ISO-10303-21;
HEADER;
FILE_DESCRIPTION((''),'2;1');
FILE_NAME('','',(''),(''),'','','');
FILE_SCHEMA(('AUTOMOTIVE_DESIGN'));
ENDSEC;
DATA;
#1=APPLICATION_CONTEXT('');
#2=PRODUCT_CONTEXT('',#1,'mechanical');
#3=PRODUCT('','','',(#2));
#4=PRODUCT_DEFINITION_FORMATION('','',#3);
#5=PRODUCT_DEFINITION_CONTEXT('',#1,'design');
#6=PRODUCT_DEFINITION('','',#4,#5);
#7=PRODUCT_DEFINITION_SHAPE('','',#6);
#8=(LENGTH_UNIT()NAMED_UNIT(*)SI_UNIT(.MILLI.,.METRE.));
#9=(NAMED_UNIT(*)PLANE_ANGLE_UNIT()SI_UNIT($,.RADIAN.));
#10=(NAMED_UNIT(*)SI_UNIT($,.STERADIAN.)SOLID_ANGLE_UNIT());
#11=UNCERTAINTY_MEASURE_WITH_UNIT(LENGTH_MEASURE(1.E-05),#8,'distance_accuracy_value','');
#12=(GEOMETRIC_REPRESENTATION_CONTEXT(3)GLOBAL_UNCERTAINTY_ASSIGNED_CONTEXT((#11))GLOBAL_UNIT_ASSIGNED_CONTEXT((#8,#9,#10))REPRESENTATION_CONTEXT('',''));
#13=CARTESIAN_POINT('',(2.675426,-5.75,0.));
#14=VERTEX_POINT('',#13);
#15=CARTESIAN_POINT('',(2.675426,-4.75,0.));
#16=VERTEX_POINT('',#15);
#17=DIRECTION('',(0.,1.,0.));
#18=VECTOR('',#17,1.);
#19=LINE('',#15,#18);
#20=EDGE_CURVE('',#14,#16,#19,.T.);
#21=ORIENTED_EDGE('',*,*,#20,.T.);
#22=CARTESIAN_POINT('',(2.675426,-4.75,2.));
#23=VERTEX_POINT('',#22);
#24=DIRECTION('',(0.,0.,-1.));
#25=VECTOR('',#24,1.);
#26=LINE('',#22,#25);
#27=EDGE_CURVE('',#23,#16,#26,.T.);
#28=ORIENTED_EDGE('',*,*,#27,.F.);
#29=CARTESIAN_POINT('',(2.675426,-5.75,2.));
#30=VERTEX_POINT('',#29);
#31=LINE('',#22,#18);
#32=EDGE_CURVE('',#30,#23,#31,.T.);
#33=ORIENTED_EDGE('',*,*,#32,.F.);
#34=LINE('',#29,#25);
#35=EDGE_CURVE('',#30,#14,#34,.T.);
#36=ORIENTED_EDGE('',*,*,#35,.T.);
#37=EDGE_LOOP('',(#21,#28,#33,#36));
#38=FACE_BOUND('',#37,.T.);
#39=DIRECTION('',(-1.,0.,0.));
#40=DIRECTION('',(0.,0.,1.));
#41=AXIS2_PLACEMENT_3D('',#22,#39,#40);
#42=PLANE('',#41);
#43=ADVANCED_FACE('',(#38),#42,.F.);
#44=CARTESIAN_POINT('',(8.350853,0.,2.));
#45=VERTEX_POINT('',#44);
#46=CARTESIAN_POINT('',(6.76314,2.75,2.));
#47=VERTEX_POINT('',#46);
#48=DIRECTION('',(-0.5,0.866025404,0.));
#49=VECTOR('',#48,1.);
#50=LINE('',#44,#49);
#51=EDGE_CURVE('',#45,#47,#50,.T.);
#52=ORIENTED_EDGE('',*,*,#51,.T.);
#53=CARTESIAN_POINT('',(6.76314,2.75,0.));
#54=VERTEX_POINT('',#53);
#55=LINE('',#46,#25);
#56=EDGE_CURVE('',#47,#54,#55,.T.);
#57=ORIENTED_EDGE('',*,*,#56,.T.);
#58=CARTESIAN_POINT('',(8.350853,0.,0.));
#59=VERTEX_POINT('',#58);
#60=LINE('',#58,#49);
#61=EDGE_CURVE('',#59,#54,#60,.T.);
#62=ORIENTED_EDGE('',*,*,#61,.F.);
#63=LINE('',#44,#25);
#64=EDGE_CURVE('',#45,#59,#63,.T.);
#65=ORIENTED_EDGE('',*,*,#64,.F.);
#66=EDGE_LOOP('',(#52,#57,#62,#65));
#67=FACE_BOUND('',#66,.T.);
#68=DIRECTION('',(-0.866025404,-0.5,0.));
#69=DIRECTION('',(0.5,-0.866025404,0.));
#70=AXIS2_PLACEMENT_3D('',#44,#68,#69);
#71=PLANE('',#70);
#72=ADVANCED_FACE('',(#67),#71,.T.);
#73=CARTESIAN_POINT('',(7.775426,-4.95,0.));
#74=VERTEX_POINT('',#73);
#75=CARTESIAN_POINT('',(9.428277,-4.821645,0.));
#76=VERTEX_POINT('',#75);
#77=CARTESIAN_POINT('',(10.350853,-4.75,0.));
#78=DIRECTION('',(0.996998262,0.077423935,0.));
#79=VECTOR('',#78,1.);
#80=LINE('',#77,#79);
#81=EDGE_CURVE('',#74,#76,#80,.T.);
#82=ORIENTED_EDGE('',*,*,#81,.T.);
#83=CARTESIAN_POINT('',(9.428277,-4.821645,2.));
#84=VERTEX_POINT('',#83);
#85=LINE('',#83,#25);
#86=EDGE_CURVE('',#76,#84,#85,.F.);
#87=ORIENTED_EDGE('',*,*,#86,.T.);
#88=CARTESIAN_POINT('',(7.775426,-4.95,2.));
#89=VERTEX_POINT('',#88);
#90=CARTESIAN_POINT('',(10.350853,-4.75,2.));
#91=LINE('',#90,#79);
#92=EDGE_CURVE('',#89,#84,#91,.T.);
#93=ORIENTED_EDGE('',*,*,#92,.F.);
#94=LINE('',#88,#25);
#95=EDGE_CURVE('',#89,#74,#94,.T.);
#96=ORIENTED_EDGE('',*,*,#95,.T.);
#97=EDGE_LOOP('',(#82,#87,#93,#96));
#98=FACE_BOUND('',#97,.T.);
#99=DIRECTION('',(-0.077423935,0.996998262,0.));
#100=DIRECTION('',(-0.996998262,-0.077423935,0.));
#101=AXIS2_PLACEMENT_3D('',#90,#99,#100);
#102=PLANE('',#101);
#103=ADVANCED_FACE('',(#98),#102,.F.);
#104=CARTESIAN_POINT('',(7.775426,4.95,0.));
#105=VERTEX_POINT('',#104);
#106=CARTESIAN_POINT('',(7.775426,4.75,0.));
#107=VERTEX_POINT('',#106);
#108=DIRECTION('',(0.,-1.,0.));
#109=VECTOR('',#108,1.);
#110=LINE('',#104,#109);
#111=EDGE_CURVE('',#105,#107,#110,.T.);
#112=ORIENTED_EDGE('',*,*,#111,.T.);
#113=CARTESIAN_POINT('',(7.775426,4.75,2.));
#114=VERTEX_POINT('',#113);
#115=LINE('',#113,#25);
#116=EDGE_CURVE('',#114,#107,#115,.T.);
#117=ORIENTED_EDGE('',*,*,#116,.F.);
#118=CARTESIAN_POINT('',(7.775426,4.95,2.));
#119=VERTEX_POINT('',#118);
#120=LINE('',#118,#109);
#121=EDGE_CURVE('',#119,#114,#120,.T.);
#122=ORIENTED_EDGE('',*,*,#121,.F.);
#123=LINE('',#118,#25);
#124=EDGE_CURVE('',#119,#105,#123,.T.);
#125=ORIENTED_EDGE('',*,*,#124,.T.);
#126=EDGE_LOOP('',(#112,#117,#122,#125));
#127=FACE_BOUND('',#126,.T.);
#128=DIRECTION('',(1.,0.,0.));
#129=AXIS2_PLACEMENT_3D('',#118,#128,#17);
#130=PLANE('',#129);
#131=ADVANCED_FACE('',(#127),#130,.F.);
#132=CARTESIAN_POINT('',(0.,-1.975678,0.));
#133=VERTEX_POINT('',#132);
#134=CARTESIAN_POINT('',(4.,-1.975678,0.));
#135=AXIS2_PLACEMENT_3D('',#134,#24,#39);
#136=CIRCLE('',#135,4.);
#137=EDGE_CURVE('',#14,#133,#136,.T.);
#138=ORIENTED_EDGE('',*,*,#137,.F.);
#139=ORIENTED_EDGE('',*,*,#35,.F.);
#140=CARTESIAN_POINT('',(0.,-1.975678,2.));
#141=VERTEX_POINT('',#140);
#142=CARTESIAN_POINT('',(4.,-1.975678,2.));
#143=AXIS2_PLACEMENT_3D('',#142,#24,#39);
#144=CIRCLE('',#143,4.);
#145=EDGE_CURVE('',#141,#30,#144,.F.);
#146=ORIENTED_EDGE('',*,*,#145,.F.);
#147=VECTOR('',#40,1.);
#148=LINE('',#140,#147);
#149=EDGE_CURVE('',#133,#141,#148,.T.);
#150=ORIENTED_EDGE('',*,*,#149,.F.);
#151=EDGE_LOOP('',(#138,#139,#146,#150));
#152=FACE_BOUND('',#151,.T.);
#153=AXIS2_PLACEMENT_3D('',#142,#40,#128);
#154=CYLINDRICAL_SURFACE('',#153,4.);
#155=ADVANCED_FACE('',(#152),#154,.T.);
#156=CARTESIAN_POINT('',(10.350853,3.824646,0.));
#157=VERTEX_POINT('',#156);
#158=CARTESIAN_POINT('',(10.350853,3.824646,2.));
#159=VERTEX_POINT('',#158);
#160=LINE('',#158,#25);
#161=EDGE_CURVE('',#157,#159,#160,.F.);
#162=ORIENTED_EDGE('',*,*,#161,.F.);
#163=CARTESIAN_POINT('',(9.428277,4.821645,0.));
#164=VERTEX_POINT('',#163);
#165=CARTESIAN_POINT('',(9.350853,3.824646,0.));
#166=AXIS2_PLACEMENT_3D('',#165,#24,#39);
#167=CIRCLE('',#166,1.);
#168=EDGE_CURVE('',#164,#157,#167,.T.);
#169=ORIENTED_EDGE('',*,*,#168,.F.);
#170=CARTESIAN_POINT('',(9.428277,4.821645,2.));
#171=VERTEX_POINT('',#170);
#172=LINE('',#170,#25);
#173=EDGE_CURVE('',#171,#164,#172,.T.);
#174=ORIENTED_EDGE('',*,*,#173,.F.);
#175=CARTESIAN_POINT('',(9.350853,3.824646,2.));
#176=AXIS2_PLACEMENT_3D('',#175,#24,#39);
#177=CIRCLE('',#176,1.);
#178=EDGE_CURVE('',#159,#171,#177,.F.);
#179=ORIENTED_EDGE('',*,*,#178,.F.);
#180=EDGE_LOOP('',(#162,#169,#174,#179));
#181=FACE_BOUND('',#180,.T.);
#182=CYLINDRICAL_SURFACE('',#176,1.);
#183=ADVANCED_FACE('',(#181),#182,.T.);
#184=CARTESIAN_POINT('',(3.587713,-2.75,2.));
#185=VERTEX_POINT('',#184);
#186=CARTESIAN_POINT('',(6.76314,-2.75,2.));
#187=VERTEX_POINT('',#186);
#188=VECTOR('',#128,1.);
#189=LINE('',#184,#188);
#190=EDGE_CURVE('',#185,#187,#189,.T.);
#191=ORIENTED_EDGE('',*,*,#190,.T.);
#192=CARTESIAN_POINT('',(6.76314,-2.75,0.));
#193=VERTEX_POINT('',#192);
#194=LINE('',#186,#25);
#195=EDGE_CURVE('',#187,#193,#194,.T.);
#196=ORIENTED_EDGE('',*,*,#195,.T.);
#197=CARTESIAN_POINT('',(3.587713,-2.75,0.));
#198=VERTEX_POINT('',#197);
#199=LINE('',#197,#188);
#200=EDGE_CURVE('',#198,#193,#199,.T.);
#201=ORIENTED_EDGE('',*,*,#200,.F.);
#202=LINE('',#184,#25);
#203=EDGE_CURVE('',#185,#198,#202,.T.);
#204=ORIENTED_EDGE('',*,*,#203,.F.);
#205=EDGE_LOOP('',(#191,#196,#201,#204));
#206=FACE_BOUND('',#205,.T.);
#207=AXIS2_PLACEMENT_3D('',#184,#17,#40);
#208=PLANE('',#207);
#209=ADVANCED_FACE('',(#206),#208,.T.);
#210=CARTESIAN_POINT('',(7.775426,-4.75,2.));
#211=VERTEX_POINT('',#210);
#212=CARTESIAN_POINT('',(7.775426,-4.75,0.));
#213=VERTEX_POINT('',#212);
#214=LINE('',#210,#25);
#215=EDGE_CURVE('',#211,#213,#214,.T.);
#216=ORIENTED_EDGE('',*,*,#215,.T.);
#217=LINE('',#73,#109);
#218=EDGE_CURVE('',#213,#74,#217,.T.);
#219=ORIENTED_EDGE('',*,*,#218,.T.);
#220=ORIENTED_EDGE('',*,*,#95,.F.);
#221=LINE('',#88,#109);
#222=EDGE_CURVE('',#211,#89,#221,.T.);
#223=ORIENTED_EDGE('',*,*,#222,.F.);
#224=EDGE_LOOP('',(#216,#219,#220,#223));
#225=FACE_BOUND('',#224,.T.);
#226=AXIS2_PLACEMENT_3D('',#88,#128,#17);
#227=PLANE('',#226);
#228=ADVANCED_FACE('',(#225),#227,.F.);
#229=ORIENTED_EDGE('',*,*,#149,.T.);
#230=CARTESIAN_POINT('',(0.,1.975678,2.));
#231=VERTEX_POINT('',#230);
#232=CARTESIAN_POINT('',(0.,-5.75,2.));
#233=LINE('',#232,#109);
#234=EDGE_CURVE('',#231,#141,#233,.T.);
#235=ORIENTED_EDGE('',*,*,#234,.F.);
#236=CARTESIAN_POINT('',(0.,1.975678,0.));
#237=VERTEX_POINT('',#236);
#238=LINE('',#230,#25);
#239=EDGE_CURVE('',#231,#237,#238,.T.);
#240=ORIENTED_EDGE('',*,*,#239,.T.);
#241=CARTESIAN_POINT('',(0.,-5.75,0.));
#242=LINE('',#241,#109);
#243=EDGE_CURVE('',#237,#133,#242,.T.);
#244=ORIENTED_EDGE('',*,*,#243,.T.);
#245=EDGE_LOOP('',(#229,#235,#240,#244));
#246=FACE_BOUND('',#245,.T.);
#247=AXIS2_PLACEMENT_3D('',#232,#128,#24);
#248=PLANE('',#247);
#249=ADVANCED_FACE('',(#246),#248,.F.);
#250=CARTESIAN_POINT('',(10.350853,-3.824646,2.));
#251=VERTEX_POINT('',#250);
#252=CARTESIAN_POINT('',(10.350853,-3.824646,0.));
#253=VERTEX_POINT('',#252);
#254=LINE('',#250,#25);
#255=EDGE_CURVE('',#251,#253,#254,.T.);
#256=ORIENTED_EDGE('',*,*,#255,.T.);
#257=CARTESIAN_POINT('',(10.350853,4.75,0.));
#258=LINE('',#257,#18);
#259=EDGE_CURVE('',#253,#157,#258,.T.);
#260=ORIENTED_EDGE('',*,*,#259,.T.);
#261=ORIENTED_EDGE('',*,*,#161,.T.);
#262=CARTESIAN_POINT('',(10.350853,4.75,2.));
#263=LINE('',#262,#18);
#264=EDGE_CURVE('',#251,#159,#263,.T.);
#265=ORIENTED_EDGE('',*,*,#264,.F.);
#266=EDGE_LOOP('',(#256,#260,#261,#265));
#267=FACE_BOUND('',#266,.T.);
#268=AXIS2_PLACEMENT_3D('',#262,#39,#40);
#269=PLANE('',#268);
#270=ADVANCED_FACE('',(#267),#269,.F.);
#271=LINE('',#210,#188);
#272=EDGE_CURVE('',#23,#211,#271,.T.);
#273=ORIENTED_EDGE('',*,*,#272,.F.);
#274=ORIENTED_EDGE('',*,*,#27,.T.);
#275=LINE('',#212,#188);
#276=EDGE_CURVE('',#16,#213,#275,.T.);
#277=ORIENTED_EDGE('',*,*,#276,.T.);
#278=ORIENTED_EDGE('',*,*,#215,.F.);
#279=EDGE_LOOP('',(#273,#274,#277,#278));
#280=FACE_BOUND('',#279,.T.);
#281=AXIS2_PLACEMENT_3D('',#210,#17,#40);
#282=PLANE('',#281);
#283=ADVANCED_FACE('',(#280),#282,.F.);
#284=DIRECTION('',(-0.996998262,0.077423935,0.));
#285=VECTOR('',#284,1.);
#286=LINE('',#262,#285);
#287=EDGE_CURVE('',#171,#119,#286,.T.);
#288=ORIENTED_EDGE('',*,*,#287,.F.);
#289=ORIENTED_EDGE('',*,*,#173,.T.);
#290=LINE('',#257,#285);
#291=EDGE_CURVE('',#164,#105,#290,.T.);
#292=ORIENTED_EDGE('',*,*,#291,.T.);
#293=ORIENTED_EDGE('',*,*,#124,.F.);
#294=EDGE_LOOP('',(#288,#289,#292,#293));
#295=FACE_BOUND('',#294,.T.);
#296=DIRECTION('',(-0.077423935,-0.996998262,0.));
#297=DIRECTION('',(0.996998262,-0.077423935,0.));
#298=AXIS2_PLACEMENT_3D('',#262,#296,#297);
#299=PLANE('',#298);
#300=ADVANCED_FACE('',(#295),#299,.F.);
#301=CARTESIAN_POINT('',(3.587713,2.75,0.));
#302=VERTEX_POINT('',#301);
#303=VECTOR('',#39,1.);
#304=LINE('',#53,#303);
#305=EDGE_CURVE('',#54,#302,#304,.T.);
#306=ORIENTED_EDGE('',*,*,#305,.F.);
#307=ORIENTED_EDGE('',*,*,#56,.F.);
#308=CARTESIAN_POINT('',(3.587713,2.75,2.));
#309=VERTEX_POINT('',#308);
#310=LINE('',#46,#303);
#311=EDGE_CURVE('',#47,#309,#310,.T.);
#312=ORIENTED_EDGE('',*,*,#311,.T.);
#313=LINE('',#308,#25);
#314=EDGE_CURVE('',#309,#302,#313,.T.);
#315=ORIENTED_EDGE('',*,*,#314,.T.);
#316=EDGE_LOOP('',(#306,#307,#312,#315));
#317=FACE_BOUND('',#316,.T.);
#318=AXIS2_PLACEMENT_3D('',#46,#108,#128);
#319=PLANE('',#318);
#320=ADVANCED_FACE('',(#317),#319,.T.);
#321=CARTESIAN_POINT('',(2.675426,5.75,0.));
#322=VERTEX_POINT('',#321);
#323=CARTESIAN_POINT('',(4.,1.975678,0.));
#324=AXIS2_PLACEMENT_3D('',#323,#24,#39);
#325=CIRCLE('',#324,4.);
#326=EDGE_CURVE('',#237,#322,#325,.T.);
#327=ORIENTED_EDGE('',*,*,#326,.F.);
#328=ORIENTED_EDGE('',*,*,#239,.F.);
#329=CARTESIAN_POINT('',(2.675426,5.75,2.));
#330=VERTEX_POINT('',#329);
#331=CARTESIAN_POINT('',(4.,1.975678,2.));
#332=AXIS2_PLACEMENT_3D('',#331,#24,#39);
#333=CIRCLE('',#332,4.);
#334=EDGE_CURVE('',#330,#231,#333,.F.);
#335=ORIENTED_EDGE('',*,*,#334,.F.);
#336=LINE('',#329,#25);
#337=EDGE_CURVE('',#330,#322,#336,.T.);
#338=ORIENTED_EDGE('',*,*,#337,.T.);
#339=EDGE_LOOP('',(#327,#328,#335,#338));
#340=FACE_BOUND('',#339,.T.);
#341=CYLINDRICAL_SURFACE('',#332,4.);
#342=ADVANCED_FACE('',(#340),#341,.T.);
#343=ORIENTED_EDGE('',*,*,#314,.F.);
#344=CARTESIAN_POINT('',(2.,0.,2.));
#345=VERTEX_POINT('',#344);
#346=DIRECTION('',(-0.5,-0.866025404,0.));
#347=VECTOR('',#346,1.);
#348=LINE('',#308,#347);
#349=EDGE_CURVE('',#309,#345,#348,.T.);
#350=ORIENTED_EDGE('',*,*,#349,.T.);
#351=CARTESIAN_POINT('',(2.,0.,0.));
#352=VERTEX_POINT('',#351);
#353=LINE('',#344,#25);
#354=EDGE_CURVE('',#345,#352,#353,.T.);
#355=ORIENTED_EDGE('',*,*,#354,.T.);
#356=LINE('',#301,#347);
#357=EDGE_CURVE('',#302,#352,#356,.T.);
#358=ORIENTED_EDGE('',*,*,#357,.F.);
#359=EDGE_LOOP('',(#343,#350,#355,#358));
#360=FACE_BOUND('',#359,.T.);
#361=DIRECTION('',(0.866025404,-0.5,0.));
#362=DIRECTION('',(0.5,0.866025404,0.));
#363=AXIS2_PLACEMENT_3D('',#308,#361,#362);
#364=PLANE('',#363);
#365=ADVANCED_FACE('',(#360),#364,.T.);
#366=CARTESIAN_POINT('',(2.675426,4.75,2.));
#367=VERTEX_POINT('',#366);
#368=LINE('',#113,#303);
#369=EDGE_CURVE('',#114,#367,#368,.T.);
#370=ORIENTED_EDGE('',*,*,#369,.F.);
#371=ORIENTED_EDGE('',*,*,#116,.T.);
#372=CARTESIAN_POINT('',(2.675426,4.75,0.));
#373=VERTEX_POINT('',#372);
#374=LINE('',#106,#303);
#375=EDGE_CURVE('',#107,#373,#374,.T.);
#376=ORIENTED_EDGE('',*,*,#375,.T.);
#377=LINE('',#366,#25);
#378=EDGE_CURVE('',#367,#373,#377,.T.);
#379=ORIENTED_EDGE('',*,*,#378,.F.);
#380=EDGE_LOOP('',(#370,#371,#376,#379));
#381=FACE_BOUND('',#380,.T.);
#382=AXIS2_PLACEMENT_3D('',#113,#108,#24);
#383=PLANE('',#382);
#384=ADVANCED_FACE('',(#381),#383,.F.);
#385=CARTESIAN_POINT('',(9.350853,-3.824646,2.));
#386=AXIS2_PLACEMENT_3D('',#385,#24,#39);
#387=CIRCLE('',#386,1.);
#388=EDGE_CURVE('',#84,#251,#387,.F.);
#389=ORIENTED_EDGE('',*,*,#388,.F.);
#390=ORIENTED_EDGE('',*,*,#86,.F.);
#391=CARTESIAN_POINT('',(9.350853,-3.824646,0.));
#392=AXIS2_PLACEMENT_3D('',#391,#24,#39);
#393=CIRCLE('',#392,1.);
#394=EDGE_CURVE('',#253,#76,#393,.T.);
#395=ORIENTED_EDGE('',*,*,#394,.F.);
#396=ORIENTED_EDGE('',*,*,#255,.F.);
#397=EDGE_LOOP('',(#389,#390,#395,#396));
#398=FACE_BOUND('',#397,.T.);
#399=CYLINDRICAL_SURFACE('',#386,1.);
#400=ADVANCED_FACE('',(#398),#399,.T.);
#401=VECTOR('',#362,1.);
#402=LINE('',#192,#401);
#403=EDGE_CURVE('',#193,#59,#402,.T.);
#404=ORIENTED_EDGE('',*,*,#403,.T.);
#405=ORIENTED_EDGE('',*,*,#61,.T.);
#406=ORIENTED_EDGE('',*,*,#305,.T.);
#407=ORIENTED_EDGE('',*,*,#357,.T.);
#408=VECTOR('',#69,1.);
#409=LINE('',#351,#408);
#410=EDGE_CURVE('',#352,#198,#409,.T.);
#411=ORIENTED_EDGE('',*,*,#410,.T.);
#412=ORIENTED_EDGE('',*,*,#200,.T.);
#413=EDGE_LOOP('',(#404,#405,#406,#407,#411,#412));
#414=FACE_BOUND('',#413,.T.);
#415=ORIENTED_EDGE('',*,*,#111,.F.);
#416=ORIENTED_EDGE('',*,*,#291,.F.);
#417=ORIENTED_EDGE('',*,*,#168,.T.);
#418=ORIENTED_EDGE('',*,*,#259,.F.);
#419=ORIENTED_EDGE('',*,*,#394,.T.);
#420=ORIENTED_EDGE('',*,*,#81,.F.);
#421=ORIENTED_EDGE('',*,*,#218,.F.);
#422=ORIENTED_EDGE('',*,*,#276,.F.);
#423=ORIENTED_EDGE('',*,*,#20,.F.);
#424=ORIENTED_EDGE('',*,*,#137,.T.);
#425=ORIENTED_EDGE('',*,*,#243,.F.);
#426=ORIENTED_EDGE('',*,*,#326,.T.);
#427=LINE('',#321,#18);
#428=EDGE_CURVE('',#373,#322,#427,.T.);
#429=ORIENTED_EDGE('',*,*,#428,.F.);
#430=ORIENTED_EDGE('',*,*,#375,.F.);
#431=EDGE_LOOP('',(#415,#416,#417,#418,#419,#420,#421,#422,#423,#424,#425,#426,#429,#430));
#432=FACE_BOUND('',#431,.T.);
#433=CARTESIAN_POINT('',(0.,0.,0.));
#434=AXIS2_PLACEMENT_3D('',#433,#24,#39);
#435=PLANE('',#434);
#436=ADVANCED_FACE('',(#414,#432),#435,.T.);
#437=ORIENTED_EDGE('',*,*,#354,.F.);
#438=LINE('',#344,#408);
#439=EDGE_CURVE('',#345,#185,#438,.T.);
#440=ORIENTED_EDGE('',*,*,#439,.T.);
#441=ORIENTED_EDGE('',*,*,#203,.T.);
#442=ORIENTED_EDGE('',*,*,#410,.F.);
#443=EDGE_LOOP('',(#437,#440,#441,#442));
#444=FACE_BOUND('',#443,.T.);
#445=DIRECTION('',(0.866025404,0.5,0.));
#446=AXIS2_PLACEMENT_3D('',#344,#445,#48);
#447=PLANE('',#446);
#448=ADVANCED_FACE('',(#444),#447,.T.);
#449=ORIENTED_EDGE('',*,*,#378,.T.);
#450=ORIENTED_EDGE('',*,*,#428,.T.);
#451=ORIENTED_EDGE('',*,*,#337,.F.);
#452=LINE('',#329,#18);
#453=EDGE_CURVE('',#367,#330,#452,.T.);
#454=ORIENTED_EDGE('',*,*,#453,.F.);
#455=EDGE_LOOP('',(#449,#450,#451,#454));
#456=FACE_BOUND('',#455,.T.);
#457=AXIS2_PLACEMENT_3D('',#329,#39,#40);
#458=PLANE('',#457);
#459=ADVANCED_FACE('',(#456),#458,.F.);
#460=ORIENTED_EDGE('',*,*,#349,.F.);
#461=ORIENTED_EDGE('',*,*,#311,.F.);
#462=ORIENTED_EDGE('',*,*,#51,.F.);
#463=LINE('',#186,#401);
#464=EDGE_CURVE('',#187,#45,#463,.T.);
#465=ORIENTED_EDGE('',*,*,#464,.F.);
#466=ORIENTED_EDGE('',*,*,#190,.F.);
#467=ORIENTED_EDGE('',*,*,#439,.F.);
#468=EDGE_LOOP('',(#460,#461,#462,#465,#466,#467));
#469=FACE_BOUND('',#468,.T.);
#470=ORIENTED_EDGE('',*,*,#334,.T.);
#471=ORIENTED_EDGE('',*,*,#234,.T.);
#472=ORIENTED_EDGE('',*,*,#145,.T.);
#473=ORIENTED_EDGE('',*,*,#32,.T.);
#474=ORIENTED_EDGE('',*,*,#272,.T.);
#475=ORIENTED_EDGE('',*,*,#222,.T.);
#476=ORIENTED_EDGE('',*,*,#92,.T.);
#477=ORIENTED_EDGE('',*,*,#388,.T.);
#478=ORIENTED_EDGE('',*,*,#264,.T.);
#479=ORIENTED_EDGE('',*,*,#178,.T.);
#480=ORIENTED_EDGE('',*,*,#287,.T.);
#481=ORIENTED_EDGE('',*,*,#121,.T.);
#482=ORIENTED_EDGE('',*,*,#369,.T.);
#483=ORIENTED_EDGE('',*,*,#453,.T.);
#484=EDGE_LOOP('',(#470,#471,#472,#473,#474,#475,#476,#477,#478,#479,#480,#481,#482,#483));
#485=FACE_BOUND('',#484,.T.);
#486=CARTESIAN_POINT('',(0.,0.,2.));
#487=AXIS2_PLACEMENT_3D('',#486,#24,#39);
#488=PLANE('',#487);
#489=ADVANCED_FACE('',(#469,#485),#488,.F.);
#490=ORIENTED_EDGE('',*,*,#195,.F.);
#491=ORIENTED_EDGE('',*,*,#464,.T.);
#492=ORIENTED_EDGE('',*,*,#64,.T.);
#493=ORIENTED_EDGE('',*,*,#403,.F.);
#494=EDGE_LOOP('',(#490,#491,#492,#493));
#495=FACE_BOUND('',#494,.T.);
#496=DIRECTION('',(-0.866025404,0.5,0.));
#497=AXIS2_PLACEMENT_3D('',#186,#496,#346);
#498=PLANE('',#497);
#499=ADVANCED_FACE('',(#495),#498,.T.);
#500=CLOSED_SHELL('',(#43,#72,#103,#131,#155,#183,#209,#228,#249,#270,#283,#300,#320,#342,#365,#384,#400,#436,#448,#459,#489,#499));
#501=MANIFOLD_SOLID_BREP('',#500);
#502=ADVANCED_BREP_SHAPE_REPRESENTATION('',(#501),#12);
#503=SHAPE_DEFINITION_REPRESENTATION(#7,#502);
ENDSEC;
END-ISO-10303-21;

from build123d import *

# Parameters (mm, degrees)
BOSS_EXTRU_1_DEPTH = 2
CONG_1_R           = 4
CONG_2_R           = 1


with BuildPart() as part:
    # Esquisse1 → Boss.-Extru.1 (new body)
    with BuildSketch(Plane.XY):
        Polygon((0, 5.75), (2.675426481, 5.75), (2.675426481, 4.75), (7.775426481, 4.75), (7.775426481, 4.95), (10.350852961, 4.75), (10.350852961, -4.75), (7.775426481, -4.95), (7.775426481, -4.75), (2.675426481, -4.75), (2.675426481, -5.75), (0, -5.75), align=None)
        Polygon((2, 0), (3.58771324, -2.75), (6.763139721, -2.75), (8.350852961, 0), (6.763139721, 2.75), (3.58771324, 2.75), align=None, mode=Mode.SUBTRACT)
    extrude(amount=BOSS_EXTRU_1_DEPTH)

    # Congé1
    # the kernel refuses this fillet: 4 mm, written as the material it takes off along each edge
    with BuildSketch(Plane(origin=(0, -5.75, -9.435804481), x_dir=(1, 0, 0), z_dir=(0, 0, 1))) as cong_1_piece_1:
        with BuildLine():
            CenterArc((4, 3.774321792), CONG_1_R, 180, 70.661811314)
            Line((0, 3.774321792), (-0.08, 3.774321792))
            Line((-0.08, 3.774321792), (-0.08, 0))
            Line((-0.08, 0), (0, -0.08))
            ThreePointArc((0, -0.08), (1.33771324, -0.08), (2.64893501, -0.075486436))
            Line((2.64893501, -0.075486436), (2.675426481, 0))
        make_face()
    extrude(amount=20.871608961, mode=Mode.SUBTRACT)
    with BuildSketch(Plane(origin=(0, 5.75, -9.435804481), x_dir=(1, 0, 0), z_dir=(0, 0, 1))) as cong_1_piece_2:
        with BuildLine():
            CenterArc((4, -3.774321792), CONG_1_R, 109.338188686, 70.661811314)
            Line((0, -3.774321792), (-0.08, -3.774321792))
            Line((-0.08, -3.774321792), (-0.08, 0))
            Line((-0.08, 0), (0, 0.08))
            ThreePointArc((0, 0.08), (1.33771324, 0.08), (2.64893501, 0.075486436))
            Line((2.64893501, 0.075486436), (2.675426481, 0))
        make_face()
    extrude(amount=20.871608961, mode=Mode.SUBTRACT)

    # Congé2
    cong_2_edges = [part.edges().sort_by_distance(p)[0] for p in [
        (10.350852961, 4.75, 1),
        (10.350852961, -4.75, 1),
    ]]
    fillet(cong_2_edges, radius=CONG_2_R)


solid = part.part
